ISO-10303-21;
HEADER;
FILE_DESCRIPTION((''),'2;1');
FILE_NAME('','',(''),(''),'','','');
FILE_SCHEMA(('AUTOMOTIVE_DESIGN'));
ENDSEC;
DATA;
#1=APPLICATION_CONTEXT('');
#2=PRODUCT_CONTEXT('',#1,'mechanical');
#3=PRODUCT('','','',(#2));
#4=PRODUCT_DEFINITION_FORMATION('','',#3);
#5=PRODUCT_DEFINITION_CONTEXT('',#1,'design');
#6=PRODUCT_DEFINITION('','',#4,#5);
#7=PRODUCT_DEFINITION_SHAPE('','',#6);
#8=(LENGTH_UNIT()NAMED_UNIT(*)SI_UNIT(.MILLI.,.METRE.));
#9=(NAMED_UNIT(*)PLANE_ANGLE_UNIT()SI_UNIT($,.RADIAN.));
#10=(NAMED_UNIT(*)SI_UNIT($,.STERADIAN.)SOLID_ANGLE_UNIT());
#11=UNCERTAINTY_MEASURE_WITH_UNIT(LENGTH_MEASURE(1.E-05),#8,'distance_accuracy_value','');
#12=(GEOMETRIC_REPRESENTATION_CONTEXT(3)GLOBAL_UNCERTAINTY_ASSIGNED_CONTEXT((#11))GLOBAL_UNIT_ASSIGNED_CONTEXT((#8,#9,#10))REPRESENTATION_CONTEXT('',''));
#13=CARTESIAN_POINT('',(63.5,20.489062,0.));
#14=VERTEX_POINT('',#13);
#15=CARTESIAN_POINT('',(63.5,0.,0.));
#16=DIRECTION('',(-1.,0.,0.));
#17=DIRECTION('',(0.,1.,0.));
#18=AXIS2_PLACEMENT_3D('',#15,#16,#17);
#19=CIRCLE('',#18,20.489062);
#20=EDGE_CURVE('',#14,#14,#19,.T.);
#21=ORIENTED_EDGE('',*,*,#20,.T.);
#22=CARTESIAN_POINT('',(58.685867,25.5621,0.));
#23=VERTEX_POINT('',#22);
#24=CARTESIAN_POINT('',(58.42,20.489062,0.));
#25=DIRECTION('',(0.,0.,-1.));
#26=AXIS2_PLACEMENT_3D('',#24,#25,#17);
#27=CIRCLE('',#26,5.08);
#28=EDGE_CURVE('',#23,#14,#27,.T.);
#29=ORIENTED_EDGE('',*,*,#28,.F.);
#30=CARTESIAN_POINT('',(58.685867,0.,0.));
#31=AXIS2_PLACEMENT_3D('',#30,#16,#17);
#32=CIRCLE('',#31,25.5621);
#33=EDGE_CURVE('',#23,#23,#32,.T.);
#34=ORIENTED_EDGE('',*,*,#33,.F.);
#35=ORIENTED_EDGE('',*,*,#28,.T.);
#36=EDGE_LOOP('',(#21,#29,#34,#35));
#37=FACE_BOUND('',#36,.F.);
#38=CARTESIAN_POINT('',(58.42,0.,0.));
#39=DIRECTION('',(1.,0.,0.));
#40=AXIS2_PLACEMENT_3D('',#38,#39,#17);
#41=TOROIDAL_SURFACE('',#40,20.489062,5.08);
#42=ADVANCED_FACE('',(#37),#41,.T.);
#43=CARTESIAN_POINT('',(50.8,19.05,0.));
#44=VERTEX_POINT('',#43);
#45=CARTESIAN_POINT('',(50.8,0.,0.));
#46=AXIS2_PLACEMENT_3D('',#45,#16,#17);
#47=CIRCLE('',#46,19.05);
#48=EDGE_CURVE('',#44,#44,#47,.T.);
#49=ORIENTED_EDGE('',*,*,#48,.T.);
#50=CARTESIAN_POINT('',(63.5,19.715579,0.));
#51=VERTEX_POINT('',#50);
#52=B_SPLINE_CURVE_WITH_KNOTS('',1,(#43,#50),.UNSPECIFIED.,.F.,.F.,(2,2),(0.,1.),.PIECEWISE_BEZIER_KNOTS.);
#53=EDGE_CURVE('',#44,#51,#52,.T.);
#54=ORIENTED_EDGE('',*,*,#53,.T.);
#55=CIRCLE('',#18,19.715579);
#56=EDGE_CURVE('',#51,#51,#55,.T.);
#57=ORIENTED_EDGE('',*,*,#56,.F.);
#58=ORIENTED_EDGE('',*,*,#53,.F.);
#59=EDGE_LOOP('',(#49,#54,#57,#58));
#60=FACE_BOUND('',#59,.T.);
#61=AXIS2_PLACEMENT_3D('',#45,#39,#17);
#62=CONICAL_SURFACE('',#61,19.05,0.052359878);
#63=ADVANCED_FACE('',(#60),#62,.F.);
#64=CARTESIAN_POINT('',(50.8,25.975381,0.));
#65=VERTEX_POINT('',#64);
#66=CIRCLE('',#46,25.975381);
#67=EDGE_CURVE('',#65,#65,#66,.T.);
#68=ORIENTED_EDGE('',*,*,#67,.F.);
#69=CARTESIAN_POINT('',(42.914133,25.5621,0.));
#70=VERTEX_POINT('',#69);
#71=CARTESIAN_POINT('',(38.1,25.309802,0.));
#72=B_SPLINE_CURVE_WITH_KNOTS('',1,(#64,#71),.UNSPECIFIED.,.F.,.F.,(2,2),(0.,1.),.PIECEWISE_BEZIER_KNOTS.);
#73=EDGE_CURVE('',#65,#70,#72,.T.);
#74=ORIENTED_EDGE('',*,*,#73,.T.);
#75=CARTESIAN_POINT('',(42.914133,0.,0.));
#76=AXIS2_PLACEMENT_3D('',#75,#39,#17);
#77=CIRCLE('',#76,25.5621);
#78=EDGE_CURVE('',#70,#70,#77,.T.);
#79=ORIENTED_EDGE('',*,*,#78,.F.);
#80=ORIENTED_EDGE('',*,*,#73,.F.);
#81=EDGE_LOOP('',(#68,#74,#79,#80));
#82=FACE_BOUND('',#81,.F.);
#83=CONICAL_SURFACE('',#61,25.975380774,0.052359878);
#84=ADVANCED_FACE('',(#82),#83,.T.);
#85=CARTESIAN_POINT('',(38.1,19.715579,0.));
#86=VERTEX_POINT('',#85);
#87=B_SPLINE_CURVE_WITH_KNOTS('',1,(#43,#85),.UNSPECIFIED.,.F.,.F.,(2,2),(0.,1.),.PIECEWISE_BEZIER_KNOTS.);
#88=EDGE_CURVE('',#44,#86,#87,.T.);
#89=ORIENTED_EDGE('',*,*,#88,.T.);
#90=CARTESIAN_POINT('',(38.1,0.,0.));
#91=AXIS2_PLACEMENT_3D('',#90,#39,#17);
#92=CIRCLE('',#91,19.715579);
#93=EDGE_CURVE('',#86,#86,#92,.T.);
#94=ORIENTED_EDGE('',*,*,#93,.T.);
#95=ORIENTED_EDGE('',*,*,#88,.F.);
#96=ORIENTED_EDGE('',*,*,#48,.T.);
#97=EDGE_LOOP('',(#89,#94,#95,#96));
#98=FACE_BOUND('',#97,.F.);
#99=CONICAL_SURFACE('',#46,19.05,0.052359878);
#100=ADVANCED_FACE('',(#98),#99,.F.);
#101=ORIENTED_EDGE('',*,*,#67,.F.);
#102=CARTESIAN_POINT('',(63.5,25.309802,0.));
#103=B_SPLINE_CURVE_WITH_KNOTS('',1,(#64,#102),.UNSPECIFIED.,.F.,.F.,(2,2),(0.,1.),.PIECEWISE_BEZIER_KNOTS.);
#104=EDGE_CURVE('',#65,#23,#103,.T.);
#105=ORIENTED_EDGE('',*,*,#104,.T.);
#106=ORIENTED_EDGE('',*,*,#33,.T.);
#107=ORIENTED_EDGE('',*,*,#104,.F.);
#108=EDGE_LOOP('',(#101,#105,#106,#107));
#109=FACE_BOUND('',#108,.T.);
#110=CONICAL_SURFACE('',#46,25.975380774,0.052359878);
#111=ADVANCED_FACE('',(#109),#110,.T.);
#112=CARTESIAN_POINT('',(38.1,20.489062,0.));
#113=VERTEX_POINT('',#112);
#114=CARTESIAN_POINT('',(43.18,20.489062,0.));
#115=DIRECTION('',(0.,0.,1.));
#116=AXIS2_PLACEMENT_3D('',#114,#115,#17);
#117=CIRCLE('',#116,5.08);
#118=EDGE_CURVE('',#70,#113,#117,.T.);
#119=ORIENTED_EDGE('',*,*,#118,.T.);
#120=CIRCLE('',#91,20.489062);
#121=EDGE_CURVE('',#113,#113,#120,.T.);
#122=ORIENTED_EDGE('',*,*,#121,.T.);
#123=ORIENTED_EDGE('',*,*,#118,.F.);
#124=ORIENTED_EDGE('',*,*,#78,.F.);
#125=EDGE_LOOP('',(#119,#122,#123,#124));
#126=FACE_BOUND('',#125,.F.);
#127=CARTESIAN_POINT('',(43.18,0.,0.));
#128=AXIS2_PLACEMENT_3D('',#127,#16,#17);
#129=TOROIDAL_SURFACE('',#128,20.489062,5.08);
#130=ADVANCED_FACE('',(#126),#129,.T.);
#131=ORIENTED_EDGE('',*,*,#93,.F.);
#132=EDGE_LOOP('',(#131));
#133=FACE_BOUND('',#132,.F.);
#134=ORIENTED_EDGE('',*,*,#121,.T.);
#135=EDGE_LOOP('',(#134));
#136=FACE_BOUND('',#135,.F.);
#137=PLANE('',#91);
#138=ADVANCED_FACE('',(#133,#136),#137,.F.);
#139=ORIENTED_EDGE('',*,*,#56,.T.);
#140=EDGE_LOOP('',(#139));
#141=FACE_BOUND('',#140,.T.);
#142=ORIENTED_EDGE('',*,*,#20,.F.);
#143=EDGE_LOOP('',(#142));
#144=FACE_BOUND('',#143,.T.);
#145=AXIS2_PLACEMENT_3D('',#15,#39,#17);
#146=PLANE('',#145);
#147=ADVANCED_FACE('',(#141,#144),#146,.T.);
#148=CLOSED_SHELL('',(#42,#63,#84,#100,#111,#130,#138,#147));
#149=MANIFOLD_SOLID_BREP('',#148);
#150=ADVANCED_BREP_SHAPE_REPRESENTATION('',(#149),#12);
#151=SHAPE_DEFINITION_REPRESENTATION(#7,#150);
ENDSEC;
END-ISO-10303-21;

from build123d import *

# Parameters (mm, degrees)
F2_R     = 25.9753807736
F2_R_2   = 19.05
F3_DEPTH = 12.7
F3_TAPER = 3
F4_R     = 5.08


# Not quite as in the source:
# - two fillets or chamfers of one size are made in one step


with BuildPart() as f3:
    # F2 (on offset) → F3 (new body, symmetric)
    with BuildSketch(Plane.YZ.offset(50.8)):
        Circle(F2_R)
        Circle(F2_R_2, mode=Mode.SUBTRACT)
    extrude(amount=F3_DEPTH, both=True, taper=F3_TAPER)

    # F4
    f4_edges = [f3.edges().sort_by_distance(p)[0] for p in [
        (63.5, -25.309802, 0),
        (38.1, -25.309802, 0),
    ]]
    fillet(f4_edges, radius=F4_R)


solid = f3.part
